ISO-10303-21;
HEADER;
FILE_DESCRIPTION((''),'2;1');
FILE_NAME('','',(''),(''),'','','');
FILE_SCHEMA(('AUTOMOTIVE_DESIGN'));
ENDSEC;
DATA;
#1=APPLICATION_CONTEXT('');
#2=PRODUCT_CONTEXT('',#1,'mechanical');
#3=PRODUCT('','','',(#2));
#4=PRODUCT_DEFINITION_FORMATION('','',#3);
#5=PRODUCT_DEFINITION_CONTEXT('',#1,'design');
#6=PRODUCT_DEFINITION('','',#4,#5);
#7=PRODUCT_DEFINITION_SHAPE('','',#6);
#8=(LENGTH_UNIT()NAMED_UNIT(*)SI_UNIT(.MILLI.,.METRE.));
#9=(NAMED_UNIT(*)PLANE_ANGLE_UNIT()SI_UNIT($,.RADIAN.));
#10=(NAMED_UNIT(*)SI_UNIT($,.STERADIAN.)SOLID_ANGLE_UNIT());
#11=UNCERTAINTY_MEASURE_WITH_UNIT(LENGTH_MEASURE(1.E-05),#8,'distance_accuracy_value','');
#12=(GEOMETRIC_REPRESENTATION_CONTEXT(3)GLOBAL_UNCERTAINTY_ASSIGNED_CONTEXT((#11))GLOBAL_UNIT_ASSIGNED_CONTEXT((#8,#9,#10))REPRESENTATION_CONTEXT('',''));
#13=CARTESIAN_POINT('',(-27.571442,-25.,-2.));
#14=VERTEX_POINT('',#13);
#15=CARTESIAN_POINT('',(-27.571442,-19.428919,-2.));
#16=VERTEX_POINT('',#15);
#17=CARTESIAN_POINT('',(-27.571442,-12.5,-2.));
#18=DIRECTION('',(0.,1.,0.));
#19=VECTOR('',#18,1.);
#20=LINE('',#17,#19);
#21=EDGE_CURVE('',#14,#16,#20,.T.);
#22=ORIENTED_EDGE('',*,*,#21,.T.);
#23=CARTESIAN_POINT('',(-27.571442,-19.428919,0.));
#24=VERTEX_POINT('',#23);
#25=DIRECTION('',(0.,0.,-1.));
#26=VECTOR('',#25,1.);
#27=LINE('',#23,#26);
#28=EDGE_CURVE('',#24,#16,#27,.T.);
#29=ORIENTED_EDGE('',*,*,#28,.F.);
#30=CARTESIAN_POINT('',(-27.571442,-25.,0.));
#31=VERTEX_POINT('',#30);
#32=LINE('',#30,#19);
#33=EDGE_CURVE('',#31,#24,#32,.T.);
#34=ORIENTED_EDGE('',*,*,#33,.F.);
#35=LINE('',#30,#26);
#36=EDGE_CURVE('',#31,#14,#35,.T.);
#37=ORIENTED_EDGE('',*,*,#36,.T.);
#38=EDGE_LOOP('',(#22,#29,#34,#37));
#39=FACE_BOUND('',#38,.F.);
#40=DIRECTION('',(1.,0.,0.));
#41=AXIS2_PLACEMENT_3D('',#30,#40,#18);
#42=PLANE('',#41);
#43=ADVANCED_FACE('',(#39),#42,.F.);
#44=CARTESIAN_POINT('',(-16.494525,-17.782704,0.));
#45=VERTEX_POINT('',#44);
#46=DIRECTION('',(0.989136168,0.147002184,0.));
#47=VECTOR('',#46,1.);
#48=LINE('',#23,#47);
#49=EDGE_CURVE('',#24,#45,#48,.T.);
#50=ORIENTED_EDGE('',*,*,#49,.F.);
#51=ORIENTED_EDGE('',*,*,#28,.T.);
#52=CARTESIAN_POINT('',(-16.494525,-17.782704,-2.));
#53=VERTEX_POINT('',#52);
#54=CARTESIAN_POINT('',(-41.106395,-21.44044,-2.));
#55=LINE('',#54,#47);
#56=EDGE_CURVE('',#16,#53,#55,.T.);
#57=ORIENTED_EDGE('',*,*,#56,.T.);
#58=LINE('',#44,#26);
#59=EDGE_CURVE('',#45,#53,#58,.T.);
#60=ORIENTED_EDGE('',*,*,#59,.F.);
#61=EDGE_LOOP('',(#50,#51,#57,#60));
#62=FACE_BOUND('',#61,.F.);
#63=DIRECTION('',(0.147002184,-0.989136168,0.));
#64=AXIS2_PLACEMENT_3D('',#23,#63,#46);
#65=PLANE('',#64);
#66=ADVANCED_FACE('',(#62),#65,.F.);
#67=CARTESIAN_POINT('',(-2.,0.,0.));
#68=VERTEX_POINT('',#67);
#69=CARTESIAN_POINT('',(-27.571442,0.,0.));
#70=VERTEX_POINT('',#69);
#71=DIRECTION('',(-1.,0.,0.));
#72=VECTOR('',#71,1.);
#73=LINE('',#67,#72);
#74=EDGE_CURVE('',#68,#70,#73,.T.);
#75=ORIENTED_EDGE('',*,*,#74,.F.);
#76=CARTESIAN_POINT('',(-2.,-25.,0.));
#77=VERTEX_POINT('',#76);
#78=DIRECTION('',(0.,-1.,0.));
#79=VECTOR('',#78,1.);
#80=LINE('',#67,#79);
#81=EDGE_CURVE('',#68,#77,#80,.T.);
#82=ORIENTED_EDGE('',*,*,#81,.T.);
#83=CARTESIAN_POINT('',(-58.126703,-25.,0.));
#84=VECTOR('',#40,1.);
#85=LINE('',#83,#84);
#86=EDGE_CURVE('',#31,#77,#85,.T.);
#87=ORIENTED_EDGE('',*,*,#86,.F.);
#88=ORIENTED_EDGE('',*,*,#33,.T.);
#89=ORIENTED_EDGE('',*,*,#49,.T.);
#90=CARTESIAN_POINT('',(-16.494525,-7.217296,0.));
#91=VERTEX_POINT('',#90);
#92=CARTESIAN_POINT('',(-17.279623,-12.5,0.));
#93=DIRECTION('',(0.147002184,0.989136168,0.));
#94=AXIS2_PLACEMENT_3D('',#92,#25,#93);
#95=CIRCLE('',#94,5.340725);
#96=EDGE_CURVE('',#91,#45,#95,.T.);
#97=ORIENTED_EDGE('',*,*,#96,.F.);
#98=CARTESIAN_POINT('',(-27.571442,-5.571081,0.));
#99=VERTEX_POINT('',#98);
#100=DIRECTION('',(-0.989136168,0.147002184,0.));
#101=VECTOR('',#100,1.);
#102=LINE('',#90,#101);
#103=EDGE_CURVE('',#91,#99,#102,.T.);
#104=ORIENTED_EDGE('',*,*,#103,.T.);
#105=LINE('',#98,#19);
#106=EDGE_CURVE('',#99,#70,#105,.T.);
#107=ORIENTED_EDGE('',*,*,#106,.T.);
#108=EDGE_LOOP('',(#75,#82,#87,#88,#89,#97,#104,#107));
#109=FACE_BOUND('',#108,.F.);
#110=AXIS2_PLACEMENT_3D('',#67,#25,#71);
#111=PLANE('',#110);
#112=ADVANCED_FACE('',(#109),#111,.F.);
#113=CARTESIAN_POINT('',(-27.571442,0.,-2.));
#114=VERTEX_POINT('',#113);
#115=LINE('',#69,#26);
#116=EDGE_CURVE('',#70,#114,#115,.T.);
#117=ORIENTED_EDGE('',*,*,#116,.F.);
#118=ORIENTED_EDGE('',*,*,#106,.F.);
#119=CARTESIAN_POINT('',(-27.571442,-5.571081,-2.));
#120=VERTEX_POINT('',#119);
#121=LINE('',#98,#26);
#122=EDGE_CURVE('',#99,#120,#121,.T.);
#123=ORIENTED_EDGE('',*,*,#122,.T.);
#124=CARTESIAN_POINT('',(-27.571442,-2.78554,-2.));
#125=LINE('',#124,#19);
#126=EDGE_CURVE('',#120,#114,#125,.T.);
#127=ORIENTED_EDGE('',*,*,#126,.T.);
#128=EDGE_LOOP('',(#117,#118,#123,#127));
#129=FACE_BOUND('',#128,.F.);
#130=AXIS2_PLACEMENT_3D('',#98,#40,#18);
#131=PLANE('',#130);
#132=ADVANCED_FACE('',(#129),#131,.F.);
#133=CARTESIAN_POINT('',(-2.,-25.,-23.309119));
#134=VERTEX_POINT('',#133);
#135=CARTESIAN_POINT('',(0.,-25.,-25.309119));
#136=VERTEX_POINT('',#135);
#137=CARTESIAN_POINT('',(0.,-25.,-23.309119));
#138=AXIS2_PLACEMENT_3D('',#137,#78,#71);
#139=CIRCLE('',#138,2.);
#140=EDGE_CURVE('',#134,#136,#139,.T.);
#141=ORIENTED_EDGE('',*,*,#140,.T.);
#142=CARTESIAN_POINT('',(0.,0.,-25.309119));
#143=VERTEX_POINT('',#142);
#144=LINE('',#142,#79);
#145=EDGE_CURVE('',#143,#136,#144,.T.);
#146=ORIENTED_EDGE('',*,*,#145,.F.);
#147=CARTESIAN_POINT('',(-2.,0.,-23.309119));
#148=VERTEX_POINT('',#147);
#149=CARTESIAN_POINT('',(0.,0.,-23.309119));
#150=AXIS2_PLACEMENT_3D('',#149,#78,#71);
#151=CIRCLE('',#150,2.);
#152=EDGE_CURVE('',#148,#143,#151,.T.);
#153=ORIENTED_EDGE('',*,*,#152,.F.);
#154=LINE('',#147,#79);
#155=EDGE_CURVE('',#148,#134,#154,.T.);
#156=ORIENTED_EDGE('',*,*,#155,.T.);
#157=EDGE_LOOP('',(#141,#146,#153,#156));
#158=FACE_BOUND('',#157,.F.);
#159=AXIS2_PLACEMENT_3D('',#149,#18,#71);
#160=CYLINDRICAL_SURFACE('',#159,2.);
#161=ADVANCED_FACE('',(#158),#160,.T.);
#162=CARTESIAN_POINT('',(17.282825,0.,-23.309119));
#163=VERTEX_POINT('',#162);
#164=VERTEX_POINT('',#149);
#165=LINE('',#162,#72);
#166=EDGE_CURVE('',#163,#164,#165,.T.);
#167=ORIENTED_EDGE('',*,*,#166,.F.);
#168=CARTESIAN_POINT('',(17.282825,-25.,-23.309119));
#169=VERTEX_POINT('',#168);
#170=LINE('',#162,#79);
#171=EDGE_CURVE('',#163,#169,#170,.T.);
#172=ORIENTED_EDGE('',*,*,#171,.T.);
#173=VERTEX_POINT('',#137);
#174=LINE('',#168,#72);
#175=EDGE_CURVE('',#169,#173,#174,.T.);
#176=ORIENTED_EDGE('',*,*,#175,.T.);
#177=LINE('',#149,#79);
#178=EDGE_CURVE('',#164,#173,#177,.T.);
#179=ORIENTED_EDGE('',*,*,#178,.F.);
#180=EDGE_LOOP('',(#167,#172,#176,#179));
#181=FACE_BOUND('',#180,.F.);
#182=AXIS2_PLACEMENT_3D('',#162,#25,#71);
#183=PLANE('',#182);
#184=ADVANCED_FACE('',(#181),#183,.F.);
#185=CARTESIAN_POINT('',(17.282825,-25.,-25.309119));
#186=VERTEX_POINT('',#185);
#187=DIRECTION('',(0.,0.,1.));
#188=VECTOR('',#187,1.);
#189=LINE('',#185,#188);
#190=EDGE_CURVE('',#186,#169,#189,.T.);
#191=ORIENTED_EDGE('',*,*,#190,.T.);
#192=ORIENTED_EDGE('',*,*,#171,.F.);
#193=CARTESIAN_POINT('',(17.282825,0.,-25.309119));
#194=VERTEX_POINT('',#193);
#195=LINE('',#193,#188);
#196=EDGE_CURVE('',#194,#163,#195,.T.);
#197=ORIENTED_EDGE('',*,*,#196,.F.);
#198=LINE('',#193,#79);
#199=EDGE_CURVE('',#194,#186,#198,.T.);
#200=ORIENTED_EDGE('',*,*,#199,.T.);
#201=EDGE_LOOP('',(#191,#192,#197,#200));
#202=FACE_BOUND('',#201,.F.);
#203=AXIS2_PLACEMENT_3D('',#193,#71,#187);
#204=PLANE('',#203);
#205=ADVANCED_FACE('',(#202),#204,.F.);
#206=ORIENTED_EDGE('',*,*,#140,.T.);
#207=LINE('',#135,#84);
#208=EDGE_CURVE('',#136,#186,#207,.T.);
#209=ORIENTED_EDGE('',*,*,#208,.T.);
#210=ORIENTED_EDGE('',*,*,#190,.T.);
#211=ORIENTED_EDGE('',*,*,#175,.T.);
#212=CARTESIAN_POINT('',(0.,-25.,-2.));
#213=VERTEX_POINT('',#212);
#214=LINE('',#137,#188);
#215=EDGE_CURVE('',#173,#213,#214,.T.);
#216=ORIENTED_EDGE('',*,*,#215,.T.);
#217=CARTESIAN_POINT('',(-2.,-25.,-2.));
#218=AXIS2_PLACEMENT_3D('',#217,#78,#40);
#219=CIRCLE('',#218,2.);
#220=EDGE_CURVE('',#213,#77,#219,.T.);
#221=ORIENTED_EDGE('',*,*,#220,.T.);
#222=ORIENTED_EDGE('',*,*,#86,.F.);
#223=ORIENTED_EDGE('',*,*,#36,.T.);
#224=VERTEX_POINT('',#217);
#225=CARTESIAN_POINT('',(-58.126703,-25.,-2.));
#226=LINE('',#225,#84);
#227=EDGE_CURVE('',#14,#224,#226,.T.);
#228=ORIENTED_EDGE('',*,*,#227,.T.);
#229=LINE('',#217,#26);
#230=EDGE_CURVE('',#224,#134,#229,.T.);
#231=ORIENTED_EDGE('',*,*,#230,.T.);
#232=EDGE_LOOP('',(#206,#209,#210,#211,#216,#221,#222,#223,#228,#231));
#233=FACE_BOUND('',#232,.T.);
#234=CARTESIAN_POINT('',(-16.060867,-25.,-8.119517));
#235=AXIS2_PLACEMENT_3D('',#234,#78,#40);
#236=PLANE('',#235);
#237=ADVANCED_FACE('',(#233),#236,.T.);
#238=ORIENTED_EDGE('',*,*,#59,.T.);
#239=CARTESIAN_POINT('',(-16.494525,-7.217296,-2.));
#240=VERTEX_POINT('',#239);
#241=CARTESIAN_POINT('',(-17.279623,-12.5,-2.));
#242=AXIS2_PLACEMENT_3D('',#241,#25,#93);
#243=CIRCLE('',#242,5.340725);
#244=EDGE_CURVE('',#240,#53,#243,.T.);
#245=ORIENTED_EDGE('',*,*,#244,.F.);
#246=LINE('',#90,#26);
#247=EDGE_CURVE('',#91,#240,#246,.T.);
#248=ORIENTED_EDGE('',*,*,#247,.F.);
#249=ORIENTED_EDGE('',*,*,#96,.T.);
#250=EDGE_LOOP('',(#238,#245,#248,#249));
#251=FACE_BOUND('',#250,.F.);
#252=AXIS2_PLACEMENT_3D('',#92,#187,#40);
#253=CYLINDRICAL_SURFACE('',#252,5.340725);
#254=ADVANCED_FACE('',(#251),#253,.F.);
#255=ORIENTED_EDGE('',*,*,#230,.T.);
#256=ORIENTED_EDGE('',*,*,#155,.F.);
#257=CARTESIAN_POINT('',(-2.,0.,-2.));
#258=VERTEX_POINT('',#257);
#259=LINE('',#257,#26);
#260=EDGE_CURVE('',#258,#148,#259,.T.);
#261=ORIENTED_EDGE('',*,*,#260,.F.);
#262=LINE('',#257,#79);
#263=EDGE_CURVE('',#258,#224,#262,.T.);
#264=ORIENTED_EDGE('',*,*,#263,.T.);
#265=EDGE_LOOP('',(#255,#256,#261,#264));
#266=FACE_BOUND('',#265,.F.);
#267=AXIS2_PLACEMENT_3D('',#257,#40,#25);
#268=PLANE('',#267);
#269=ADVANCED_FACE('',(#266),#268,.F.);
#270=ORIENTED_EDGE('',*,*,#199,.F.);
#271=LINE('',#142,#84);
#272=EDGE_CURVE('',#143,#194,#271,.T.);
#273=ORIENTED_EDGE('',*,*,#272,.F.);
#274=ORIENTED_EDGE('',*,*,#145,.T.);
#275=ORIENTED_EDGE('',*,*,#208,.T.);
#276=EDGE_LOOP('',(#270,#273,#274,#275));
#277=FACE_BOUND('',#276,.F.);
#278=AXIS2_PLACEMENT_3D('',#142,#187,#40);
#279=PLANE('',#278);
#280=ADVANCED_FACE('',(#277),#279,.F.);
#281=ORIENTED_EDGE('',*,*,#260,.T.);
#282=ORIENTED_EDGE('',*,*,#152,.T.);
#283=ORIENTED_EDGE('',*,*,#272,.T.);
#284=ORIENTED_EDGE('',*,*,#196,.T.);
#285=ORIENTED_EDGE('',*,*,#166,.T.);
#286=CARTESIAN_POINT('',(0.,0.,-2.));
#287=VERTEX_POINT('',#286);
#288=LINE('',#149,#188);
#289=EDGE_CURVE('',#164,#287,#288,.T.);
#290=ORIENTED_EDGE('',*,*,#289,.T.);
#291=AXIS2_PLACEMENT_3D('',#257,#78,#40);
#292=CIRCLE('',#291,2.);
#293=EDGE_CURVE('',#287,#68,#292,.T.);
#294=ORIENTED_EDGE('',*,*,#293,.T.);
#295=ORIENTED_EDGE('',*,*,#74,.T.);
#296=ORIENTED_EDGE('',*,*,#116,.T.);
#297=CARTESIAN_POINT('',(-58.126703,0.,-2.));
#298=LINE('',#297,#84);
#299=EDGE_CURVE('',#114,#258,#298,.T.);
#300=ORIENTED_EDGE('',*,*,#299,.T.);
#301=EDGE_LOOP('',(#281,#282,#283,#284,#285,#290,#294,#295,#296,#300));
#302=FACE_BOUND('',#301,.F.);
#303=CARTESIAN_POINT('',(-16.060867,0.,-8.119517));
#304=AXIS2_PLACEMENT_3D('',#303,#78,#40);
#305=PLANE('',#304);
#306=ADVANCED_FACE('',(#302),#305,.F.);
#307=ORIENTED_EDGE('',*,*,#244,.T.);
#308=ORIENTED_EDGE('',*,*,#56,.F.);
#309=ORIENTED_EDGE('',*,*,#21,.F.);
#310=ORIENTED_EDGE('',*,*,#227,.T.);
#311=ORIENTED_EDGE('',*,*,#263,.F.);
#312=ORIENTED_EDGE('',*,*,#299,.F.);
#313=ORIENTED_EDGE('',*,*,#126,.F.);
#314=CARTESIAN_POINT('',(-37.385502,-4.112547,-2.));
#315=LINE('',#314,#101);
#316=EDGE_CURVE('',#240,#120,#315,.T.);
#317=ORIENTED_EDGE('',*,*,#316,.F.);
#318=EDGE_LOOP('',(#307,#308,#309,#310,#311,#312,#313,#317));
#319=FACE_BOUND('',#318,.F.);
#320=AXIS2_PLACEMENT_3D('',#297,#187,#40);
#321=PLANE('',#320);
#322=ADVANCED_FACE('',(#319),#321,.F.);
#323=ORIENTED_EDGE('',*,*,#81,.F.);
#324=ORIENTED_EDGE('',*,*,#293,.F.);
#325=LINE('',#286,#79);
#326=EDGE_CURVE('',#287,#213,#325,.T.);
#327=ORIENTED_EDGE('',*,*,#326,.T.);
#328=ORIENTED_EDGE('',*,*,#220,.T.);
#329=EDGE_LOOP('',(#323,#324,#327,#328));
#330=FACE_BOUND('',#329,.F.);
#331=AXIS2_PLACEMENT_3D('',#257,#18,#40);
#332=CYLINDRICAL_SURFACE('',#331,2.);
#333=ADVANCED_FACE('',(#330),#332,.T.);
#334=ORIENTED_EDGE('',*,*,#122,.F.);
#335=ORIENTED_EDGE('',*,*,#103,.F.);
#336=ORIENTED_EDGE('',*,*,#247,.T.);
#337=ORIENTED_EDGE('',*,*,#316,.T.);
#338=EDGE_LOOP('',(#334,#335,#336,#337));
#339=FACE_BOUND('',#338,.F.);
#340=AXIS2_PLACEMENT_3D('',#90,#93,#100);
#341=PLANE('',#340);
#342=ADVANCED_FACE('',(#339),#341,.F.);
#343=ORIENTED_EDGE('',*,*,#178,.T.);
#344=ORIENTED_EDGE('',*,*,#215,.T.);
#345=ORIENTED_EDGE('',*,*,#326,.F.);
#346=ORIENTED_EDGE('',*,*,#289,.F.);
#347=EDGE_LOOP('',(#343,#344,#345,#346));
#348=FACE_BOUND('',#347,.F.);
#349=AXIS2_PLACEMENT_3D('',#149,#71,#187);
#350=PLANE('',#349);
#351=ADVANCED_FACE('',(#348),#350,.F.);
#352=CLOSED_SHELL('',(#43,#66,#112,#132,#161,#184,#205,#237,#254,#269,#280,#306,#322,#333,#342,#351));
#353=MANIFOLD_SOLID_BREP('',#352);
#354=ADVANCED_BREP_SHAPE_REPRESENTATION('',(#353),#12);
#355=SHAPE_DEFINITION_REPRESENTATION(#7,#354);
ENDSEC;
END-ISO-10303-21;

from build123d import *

# Parameters (mm, degrees)
F1_DEPTH = 25
F2_R     = 5.3407247833
F3_DEPTH = 25.3101193046
F5_DEPTH = 106
F6_DEPTH = 25.3101193046


# Not quite as in the source:
# - an extrude ends at something that could not be found from the text; its depth is read off the source's solid


with BuildPart() as f1:
    # F0 (on Front) → F1 (new body)
    with BuildSketch(Plane.XZ):
        with BuildLine():
            Line((-2, 0), (-58.1267029047, 0))
            Line((-58.1267029047, 0), (-58.1267029047, -2))
            Line((-58.1267029047, -2), (-2, -2))
            Line((-2, -2), (-2, -23.3091193046))
            ThreePointArc((-2, -23.3091193046), (-1.4142135624, -24.723332867), (0, -25.3091193046))
            Line((0, -25.3091193046), (17.2828252222, -25.3091193046))
            Line((17.2828252222, -25.3091193046), (17.2828252222, -23.3091193046))
            Line((17.2828252222, -23.3091193046), (0, -23.3091193046))
            Line((0, -23.3091193046), (0, -2))
            ThreePointArc((0, -2), (-0.5857864376, -0.5857864376), (-2, 0))
        make_face()
    extrude(amount=F1_DEPTH)

    # F2 (on face) → F3 (cut, through all)
    with BuildSketch(Plane.XY):
        with Locations((-17.279623447, -12.5)):
            Circle(F2_R)
    extrude(amount=-F3_DEPTH, mode=Mode.SUBTRACT)

    # F4 (on face) → F5 (cut, through all)
    with BuildSketch(Plane.XY):
        with BuildLine():
            Line((-27.5714416057, -5.5710808575), (-27.5714416057, 0))
            Line((-27.5714416057, 0), (-58.1267029047, 0))
            Line((-58.1267029047, 0), (-58.1267029047, -25))
            Line((-58.1267029047, -25), (-27.5714416057, -25))
            Line((-27.5714416057, -25), (-27.5714416057, -19.4289191425))
            Line((-27.5714416057, -19.4289191425), (-16.4945252417, -17.7827040443))
            ThreePointArc((-16.4945252417, -17.7827040443), (-22.6203482303, -12.5), (-16.4945252417, -7.2172959557))
            Line((-16.4945252417, -7.2172959557), (-27.5714416057, -5.5710808575))
        make_face()
    extrude(amount=F5_DEPTH, mode=Mode.SUBTRACT)

    # F4 (on face) → F6 (cut, through all)
    with BuildSketch(Plane.XY):
        with BuildLine():
            Line((-27.5714416057, -5.5710808575), (-27.5714416057, 0))
            Line((-27.5714416057, 0), (-58.1267029047, 0))
            Line((-58.1267029047, 0), (-58.1267029047, -25))
            Line((-58.1267029047, -25), (-27.5714416057, -25))
            Line((-27.5714416057, -25), (-27.5714416057, -19.4289191425))
            Line((-27.5714416057, -19.4289191425), (-16.4945252417, -17.7827040443))
            ThreePointArc((-16.4945252417, -17.7827040443), (-22.6203482303, -12.5), (-16.4945252417, -7.2172959557))
            Line((-16.4945252417, -7.2172959557), (-27.5714416057, -5.5710808575))
        make_face()
    extrude(amount=-F6_DEPTH, mode=Mode.SUBTRACT)


solid = f1.part
